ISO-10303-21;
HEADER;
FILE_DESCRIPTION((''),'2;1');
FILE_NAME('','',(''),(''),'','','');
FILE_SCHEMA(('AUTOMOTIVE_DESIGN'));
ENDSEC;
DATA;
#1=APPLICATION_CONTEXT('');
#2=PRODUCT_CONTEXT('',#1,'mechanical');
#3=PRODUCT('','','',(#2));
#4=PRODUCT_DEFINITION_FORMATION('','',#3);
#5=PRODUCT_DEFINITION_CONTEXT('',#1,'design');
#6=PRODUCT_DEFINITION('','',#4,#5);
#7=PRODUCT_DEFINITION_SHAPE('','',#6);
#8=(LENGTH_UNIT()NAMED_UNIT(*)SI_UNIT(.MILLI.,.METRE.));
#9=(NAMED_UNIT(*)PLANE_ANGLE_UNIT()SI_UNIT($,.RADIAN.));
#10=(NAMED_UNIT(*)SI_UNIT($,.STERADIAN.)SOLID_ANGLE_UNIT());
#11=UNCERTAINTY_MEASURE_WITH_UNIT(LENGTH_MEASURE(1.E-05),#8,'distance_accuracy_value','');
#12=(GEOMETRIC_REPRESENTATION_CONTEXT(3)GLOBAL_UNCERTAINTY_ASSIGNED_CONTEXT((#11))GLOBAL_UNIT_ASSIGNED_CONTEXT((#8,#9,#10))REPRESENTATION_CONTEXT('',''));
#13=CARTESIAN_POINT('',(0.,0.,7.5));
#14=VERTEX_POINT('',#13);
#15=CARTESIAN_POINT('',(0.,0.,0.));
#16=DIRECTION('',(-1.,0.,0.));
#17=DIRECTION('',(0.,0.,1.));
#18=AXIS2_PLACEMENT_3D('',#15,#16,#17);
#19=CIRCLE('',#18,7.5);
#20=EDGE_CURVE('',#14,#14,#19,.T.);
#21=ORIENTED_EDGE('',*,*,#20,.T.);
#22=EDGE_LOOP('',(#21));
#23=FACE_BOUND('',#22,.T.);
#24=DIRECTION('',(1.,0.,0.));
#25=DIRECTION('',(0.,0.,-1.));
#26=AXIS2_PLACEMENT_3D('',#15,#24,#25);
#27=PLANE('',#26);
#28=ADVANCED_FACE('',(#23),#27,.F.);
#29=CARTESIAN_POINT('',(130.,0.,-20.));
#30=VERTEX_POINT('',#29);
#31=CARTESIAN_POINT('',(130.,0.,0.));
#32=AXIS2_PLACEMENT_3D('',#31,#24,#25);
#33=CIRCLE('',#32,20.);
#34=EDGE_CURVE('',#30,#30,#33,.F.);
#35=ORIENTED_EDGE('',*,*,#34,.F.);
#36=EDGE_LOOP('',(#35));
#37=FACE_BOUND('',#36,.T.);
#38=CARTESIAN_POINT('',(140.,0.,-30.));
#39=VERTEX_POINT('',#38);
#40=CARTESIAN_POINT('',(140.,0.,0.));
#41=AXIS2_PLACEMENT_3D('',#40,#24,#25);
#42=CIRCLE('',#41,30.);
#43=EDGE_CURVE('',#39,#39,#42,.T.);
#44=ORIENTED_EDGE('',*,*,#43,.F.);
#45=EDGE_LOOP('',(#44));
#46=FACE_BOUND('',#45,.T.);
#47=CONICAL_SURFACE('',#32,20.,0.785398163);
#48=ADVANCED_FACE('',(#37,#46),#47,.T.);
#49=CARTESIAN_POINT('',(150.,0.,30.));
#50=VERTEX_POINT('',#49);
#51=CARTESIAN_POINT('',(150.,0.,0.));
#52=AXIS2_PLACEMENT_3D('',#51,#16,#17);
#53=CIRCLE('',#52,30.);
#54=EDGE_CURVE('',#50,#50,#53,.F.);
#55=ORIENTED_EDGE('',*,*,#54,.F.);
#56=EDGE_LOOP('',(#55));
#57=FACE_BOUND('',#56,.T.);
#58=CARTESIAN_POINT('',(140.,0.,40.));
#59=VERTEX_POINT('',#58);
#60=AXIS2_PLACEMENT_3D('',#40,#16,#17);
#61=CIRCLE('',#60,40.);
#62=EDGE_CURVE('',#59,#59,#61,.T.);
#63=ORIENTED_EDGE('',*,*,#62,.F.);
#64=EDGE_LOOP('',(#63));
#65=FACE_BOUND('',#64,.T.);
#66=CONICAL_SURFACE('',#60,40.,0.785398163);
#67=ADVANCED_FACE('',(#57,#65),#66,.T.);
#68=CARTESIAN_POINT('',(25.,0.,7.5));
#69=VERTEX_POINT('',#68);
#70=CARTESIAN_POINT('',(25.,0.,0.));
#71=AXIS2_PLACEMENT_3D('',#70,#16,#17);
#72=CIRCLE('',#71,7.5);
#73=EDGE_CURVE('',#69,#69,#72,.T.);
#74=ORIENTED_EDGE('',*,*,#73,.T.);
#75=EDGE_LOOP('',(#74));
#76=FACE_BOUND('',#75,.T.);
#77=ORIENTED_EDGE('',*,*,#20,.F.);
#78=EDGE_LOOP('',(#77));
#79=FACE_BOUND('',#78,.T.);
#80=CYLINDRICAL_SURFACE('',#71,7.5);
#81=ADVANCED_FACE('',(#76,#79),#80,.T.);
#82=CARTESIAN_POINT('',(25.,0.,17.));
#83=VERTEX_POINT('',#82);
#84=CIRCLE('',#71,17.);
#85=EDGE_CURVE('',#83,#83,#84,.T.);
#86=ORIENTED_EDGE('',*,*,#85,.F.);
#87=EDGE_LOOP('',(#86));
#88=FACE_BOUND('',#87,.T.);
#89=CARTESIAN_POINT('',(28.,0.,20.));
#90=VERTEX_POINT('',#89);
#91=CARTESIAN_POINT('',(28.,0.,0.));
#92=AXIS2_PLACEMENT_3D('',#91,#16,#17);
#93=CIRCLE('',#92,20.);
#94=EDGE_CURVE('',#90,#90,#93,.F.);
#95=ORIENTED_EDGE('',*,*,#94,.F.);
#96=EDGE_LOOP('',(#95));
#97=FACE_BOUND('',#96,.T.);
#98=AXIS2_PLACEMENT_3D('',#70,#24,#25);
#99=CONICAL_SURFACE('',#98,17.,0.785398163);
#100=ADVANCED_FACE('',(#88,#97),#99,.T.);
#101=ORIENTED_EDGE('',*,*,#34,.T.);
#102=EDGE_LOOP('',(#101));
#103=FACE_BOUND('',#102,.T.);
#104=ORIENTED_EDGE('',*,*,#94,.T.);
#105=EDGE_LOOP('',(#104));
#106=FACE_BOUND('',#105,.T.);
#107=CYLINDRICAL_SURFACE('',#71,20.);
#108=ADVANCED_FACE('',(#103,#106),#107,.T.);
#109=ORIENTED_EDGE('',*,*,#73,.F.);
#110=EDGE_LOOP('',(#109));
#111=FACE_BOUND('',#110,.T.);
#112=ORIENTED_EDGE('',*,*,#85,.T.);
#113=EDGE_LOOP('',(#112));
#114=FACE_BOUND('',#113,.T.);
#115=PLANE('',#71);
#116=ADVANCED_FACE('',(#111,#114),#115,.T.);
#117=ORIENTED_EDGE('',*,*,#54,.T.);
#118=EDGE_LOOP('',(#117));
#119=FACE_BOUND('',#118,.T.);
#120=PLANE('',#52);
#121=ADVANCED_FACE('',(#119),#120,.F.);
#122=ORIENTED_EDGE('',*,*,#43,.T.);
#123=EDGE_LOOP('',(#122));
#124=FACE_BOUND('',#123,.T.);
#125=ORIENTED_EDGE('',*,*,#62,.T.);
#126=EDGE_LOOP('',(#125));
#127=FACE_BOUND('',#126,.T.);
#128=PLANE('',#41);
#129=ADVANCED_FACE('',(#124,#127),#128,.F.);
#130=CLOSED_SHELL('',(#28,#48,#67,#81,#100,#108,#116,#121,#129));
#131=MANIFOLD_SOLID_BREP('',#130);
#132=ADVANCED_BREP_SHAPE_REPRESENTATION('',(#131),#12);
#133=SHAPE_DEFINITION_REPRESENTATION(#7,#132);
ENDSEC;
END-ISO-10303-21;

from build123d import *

# Parameters (mm, degrees)
SKETCH_1_W     = 25
SKETCH_1_H     = 7.5
SKETCH_1_W_2   = 10
SKETCH_1_H_2   = 40
CHAMFER_1_SIZE = 10
CHAMFER_2_SIZE = 10
CHAMFER_3_SIZE = 3


with BuildPart() as part:
    # 草圖1 → 迴轉1 (revolve)
    with BuildSketch(Plane.XY, mode=Mode.PRIVATE) as revolve_1_sk:
        with Locations((12.5, 3.75)):
            Rectangle(SKETCH_1_W, SKETCH_1_H)
        with Locations((145, 20)):
            Rectangle(SKETCH_1_W_2, SKETCH_1_H_2)
        Polygon((25, 7.5), (25, 0), (140, 0), (140, 20), (25, 20), align=None)
    revolve(revolve_1_sk.sketch.rotate(Axis((25, 0, 0), (1, 0, 0)), 90), axis=Axis((25, 0, 0), (1, 0, 0)))

    # 倒角1
    chamfer_1_edges = [part.edges().sort_by_distance(p)[0] for p in [
        (150, 0, -40),
    ]]
    chamfer(chamfer_1_edges, length=CHAMFER_1_SIZE - 0.0001)  # a hair under: the kernel refuses the full size

    # 倒角2
    chamfer_2_edges = [part.edges().sort_by_distance(p)[0] for p in [
        (140, 0, -20),
    ]]
    chamfer(chamfer_2_edges, length=CHAMFER_2_SIZE)

    # 倒角3
    chamfer_3_edges = [part.edges().sort_by_distance(p)[0] for p in [
        (25, 0, -20),
    ]]
    chamfer(chamfer_3_edges, length=CHAMFER_3_SIZE)


solid = part.part
